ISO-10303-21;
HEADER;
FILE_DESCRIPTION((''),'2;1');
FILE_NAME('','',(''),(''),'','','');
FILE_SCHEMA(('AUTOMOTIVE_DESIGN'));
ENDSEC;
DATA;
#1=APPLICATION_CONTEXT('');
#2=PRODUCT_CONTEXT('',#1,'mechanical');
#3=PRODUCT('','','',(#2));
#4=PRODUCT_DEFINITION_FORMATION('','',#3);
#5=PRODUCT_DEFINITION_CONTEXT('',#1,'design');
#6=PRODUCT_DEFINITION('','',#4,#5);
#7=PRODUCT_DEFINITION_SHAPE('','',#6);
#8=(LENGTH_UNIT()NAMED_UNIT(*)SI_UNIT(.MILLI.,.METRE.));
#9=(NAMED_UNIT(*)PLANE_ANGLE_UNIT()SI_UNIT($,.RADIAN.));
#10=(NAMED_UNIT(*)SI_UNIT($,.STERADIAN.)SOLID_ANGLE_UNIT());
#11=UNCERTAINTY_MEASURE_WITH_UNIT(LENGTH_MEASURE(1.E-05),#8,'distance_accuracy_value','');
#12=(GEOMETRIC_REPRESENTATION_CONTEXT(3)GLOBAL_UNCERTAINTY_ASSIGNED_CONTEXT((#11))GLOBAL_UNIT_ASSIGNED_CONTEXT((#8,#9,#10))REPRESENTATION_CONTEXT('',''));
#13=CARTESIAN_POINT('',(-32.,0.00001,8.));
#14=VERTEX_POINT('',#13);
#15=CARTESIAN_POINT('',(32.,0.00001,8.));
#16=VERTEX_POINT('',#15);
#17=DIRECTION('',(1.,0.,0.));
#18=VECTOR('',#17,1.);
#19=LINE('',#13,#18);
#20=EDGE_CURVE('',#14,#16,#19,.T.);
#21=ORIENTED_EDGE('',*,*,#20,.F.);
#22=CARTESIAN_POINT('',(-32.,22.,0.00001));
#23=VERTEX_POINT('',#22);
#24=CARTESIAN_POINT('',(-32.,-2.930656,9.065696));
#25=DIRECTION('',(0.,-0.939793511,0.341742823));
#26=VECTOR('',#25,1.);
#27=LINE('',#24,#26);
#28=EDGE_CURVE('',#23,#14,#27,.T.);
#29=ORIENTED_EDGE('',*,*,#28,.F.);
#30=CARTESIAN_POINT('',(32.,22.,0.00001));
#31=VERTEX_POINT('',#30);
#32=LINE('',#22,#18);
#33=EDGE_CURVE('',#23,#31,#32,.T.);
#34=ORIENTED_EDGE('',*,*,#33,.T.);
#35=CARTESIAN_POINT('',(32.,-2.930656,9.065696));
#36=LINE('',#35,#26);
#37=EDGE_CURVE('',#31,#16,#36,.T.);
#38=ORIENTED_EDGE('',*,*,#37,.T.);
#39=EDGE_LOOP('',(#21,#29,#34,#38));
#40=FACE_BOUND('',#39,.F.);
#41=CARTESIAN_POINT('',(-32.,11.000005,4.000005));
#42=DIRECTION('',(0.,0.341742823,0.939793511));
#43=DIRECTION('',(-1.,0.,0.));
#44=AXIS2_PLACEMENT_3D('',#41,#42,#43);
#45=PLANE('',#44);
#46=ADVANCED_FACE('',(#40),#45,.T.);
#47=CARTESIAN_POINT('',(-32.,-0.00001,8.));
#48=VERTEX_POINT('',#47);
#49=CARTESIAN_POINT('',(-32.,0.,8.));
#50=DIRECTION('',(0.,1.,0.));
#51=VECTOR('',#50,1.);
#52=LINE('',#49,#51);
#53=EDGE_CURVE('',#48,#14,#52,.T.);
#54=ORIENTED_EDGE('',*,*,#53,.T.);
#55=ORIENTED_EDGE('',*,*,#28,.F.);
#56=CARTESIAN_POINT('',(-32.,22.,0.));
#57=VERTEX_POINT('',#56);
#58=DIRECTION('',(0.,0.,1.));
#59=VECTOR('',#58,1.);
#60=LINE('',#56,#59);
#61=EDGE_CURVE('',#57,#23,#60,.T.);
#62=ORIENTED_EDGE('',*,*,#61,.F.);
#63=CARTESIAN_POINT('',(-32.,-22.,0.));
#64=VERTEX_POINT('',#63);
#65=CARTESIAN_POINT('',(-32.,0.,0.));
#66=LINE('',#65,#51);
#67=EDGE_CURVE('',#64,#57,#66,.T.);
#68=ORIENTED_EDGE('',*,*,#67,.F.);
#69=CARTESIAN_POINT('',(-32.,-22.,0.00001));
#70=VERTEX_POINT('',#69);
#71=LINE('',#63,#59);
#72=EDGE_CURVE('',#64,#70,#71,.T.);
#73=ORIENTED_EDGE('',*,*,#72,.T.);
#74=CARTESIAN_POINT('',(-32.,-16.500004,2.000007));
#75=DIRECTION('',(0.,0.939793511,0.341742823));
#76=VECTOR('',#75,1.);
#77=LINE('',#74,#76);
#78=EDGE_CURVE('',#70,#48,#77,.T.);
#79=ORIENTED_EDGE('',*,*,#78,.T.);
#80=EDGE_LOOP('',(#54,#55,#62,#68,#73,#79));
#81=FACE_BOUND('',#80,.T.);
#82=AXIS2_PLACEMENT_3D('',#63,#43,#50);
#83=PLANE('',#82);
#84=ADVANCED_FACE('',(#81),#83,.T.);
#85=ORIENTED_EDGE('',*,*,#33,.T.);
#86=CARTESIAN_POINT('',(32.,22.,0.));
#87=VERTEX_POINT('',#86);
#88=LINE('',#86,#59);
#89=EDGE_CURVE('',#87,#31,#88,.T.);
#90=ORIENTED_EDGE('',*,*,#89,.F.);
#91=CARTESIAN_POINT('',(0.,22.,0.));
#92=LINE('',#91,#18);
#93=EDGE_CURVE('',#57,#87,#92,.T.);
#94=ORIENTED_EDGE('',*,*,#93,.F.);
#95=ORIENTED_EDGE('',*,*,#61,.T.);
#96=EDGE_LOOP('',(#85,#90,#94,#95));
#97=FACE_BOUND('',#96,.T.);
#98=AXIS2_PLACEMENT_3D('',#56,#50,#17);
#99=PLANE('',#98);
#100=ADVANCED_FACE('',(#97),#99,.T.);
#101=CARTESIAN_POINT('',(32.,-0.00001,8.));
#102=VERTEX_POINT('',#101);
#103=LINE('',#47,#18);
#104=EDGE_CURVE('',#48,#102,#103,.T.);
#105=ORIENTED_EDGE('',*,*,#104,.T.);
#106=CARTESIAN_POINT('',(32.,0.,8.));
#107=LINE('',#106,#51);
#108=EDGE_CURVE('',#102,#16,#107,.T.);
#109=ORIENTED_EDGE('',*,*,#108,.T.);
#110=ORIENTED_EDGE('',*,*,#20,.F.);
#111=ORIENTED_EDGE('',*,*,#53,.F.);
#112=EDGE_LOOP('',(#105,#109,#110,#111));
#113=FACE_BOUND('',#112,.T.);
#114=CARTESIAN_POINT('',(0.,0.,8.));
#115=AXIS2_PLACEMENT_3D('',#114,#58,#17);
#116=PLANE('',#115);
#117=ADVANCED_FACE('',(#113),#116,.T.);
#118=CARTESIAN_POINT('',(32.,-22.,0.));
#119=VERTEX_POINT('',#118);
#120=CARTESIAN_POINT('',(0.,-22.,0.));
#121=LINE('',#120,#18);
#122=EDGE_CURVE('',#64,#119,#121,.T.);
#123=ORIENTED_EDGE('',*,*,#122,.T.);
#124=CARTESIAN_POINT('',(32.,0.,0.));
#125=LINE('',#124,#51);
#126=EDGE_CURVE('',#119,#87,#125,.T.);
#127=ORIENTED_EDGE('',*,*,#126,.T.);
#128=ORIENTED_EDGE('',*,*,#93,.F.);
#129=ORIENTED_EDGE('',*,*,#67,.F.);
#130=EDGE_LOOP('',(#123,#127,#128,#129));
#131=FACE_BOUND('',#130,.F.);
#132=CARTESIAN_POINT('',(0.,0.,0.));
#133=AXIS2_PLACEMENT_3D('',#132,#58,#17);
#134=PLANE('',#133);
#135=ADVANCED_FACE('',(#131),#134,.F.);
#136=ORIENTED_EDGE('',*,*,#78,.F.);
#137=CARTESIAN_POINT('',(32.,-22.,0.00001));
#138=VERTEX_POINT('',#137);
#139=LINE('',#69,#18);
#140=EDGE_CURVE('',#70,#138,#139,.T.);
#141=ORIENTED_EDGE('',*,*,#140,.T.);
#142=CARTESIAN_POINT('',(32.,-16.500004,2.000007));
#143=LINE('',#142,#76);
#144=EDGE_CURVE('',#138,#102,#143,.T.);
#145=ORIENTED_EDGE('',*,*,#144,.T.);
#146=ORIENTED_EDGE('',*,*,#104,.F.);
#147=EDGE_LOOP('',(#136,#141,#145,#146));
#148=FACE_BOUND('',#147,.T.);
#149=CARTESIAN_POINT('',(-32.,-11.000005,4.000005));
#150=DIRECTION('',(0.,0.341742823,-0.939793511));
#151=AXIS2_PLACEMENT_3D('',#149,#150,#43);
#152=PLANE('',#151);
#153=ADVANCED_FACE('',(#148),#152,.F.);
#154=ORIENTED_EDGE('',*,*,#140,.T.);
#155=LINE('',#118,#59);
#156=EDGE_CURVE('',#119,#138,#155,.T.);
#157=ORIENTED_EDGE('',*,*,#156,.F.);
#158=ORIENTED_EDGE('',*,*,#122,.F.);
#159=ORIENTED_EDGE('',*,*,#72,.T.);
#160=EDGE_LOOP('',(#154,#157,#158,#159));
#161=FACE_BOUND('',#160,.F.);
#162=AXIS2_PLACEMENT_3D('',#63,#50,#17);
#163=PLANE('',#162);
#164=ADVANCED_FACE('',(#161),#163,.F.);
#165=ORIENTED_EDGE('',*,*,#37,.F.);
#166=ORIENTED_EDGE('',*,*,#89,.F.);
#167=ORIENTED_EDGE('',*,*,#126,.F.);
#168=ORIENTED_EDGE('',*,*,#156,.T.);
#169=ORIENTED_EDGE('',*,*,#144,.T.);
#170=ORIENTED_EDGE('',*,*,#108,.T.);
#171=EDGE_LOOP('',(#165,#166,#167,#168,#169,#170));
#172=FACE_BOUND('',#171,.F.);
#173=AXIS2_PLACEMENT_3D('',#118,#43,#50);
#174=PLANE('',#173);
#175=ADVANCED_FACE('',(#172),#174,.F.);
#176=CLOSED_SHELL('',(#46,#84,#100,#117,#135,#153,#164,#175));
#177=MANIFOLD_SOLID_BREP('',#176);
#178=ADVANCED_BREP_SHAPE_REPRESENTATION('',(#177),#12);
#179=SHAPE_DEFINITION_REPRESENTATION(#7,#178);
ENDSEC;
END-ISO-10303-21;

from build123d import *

# Parameters (mm, degrees)
F0_W       = 64
F0_H       = 44
F1_DEPTH   = 8
F2_SIZE2   = 21.99999
F2_SIZE    = 7.99999
F2_2_SIZE2 = 21.99999
F2_2_SIZE  = 7.99999


# Not quite as in the source:
# - a fillet or chamfer is up to 0.001 mm smaller than in the source, because OpenCascade refuses the exact size


with BuildPart() as f1:
    # F0 (on Top) → F1 (new body)
    with BuildSketch(Plane.XY):
        Rectangle(F0_W, F0_H)
    extrude(amount=F1_DEPTH)

    # F2 (size 8 and 22 in the source; OpenCascade refuses exactly that, so slightly less here)
    f2_edges = [f1.edges().sort_by_distance(p)[0] for p in [
        (0, -22, 8),
    ]]
    f2_side = f1.faces().sort_by_distance((0, -22, 4))[0]
    chamfer(f2_edges, length=F2_SIZE, length2=F2_SIZE2, reference=f2_side)

    # F2#2 (size 8 and 22 in the source; OpenCascade refuses exactly that, so slightly less here)
    f2_2_edges = [f1.edges().sort_by_distance(p)[0] for p in [
        (0, 22, 8),
    ]]
    f2_2_side = f1.faces().sort_by_distance((0, 22, 4))[0]
    chamfer(f2_2_edges, length=F2_2_SIZE, length2=F2_2_SIZE2, reference=f2_2_side)


solid = f1.part
